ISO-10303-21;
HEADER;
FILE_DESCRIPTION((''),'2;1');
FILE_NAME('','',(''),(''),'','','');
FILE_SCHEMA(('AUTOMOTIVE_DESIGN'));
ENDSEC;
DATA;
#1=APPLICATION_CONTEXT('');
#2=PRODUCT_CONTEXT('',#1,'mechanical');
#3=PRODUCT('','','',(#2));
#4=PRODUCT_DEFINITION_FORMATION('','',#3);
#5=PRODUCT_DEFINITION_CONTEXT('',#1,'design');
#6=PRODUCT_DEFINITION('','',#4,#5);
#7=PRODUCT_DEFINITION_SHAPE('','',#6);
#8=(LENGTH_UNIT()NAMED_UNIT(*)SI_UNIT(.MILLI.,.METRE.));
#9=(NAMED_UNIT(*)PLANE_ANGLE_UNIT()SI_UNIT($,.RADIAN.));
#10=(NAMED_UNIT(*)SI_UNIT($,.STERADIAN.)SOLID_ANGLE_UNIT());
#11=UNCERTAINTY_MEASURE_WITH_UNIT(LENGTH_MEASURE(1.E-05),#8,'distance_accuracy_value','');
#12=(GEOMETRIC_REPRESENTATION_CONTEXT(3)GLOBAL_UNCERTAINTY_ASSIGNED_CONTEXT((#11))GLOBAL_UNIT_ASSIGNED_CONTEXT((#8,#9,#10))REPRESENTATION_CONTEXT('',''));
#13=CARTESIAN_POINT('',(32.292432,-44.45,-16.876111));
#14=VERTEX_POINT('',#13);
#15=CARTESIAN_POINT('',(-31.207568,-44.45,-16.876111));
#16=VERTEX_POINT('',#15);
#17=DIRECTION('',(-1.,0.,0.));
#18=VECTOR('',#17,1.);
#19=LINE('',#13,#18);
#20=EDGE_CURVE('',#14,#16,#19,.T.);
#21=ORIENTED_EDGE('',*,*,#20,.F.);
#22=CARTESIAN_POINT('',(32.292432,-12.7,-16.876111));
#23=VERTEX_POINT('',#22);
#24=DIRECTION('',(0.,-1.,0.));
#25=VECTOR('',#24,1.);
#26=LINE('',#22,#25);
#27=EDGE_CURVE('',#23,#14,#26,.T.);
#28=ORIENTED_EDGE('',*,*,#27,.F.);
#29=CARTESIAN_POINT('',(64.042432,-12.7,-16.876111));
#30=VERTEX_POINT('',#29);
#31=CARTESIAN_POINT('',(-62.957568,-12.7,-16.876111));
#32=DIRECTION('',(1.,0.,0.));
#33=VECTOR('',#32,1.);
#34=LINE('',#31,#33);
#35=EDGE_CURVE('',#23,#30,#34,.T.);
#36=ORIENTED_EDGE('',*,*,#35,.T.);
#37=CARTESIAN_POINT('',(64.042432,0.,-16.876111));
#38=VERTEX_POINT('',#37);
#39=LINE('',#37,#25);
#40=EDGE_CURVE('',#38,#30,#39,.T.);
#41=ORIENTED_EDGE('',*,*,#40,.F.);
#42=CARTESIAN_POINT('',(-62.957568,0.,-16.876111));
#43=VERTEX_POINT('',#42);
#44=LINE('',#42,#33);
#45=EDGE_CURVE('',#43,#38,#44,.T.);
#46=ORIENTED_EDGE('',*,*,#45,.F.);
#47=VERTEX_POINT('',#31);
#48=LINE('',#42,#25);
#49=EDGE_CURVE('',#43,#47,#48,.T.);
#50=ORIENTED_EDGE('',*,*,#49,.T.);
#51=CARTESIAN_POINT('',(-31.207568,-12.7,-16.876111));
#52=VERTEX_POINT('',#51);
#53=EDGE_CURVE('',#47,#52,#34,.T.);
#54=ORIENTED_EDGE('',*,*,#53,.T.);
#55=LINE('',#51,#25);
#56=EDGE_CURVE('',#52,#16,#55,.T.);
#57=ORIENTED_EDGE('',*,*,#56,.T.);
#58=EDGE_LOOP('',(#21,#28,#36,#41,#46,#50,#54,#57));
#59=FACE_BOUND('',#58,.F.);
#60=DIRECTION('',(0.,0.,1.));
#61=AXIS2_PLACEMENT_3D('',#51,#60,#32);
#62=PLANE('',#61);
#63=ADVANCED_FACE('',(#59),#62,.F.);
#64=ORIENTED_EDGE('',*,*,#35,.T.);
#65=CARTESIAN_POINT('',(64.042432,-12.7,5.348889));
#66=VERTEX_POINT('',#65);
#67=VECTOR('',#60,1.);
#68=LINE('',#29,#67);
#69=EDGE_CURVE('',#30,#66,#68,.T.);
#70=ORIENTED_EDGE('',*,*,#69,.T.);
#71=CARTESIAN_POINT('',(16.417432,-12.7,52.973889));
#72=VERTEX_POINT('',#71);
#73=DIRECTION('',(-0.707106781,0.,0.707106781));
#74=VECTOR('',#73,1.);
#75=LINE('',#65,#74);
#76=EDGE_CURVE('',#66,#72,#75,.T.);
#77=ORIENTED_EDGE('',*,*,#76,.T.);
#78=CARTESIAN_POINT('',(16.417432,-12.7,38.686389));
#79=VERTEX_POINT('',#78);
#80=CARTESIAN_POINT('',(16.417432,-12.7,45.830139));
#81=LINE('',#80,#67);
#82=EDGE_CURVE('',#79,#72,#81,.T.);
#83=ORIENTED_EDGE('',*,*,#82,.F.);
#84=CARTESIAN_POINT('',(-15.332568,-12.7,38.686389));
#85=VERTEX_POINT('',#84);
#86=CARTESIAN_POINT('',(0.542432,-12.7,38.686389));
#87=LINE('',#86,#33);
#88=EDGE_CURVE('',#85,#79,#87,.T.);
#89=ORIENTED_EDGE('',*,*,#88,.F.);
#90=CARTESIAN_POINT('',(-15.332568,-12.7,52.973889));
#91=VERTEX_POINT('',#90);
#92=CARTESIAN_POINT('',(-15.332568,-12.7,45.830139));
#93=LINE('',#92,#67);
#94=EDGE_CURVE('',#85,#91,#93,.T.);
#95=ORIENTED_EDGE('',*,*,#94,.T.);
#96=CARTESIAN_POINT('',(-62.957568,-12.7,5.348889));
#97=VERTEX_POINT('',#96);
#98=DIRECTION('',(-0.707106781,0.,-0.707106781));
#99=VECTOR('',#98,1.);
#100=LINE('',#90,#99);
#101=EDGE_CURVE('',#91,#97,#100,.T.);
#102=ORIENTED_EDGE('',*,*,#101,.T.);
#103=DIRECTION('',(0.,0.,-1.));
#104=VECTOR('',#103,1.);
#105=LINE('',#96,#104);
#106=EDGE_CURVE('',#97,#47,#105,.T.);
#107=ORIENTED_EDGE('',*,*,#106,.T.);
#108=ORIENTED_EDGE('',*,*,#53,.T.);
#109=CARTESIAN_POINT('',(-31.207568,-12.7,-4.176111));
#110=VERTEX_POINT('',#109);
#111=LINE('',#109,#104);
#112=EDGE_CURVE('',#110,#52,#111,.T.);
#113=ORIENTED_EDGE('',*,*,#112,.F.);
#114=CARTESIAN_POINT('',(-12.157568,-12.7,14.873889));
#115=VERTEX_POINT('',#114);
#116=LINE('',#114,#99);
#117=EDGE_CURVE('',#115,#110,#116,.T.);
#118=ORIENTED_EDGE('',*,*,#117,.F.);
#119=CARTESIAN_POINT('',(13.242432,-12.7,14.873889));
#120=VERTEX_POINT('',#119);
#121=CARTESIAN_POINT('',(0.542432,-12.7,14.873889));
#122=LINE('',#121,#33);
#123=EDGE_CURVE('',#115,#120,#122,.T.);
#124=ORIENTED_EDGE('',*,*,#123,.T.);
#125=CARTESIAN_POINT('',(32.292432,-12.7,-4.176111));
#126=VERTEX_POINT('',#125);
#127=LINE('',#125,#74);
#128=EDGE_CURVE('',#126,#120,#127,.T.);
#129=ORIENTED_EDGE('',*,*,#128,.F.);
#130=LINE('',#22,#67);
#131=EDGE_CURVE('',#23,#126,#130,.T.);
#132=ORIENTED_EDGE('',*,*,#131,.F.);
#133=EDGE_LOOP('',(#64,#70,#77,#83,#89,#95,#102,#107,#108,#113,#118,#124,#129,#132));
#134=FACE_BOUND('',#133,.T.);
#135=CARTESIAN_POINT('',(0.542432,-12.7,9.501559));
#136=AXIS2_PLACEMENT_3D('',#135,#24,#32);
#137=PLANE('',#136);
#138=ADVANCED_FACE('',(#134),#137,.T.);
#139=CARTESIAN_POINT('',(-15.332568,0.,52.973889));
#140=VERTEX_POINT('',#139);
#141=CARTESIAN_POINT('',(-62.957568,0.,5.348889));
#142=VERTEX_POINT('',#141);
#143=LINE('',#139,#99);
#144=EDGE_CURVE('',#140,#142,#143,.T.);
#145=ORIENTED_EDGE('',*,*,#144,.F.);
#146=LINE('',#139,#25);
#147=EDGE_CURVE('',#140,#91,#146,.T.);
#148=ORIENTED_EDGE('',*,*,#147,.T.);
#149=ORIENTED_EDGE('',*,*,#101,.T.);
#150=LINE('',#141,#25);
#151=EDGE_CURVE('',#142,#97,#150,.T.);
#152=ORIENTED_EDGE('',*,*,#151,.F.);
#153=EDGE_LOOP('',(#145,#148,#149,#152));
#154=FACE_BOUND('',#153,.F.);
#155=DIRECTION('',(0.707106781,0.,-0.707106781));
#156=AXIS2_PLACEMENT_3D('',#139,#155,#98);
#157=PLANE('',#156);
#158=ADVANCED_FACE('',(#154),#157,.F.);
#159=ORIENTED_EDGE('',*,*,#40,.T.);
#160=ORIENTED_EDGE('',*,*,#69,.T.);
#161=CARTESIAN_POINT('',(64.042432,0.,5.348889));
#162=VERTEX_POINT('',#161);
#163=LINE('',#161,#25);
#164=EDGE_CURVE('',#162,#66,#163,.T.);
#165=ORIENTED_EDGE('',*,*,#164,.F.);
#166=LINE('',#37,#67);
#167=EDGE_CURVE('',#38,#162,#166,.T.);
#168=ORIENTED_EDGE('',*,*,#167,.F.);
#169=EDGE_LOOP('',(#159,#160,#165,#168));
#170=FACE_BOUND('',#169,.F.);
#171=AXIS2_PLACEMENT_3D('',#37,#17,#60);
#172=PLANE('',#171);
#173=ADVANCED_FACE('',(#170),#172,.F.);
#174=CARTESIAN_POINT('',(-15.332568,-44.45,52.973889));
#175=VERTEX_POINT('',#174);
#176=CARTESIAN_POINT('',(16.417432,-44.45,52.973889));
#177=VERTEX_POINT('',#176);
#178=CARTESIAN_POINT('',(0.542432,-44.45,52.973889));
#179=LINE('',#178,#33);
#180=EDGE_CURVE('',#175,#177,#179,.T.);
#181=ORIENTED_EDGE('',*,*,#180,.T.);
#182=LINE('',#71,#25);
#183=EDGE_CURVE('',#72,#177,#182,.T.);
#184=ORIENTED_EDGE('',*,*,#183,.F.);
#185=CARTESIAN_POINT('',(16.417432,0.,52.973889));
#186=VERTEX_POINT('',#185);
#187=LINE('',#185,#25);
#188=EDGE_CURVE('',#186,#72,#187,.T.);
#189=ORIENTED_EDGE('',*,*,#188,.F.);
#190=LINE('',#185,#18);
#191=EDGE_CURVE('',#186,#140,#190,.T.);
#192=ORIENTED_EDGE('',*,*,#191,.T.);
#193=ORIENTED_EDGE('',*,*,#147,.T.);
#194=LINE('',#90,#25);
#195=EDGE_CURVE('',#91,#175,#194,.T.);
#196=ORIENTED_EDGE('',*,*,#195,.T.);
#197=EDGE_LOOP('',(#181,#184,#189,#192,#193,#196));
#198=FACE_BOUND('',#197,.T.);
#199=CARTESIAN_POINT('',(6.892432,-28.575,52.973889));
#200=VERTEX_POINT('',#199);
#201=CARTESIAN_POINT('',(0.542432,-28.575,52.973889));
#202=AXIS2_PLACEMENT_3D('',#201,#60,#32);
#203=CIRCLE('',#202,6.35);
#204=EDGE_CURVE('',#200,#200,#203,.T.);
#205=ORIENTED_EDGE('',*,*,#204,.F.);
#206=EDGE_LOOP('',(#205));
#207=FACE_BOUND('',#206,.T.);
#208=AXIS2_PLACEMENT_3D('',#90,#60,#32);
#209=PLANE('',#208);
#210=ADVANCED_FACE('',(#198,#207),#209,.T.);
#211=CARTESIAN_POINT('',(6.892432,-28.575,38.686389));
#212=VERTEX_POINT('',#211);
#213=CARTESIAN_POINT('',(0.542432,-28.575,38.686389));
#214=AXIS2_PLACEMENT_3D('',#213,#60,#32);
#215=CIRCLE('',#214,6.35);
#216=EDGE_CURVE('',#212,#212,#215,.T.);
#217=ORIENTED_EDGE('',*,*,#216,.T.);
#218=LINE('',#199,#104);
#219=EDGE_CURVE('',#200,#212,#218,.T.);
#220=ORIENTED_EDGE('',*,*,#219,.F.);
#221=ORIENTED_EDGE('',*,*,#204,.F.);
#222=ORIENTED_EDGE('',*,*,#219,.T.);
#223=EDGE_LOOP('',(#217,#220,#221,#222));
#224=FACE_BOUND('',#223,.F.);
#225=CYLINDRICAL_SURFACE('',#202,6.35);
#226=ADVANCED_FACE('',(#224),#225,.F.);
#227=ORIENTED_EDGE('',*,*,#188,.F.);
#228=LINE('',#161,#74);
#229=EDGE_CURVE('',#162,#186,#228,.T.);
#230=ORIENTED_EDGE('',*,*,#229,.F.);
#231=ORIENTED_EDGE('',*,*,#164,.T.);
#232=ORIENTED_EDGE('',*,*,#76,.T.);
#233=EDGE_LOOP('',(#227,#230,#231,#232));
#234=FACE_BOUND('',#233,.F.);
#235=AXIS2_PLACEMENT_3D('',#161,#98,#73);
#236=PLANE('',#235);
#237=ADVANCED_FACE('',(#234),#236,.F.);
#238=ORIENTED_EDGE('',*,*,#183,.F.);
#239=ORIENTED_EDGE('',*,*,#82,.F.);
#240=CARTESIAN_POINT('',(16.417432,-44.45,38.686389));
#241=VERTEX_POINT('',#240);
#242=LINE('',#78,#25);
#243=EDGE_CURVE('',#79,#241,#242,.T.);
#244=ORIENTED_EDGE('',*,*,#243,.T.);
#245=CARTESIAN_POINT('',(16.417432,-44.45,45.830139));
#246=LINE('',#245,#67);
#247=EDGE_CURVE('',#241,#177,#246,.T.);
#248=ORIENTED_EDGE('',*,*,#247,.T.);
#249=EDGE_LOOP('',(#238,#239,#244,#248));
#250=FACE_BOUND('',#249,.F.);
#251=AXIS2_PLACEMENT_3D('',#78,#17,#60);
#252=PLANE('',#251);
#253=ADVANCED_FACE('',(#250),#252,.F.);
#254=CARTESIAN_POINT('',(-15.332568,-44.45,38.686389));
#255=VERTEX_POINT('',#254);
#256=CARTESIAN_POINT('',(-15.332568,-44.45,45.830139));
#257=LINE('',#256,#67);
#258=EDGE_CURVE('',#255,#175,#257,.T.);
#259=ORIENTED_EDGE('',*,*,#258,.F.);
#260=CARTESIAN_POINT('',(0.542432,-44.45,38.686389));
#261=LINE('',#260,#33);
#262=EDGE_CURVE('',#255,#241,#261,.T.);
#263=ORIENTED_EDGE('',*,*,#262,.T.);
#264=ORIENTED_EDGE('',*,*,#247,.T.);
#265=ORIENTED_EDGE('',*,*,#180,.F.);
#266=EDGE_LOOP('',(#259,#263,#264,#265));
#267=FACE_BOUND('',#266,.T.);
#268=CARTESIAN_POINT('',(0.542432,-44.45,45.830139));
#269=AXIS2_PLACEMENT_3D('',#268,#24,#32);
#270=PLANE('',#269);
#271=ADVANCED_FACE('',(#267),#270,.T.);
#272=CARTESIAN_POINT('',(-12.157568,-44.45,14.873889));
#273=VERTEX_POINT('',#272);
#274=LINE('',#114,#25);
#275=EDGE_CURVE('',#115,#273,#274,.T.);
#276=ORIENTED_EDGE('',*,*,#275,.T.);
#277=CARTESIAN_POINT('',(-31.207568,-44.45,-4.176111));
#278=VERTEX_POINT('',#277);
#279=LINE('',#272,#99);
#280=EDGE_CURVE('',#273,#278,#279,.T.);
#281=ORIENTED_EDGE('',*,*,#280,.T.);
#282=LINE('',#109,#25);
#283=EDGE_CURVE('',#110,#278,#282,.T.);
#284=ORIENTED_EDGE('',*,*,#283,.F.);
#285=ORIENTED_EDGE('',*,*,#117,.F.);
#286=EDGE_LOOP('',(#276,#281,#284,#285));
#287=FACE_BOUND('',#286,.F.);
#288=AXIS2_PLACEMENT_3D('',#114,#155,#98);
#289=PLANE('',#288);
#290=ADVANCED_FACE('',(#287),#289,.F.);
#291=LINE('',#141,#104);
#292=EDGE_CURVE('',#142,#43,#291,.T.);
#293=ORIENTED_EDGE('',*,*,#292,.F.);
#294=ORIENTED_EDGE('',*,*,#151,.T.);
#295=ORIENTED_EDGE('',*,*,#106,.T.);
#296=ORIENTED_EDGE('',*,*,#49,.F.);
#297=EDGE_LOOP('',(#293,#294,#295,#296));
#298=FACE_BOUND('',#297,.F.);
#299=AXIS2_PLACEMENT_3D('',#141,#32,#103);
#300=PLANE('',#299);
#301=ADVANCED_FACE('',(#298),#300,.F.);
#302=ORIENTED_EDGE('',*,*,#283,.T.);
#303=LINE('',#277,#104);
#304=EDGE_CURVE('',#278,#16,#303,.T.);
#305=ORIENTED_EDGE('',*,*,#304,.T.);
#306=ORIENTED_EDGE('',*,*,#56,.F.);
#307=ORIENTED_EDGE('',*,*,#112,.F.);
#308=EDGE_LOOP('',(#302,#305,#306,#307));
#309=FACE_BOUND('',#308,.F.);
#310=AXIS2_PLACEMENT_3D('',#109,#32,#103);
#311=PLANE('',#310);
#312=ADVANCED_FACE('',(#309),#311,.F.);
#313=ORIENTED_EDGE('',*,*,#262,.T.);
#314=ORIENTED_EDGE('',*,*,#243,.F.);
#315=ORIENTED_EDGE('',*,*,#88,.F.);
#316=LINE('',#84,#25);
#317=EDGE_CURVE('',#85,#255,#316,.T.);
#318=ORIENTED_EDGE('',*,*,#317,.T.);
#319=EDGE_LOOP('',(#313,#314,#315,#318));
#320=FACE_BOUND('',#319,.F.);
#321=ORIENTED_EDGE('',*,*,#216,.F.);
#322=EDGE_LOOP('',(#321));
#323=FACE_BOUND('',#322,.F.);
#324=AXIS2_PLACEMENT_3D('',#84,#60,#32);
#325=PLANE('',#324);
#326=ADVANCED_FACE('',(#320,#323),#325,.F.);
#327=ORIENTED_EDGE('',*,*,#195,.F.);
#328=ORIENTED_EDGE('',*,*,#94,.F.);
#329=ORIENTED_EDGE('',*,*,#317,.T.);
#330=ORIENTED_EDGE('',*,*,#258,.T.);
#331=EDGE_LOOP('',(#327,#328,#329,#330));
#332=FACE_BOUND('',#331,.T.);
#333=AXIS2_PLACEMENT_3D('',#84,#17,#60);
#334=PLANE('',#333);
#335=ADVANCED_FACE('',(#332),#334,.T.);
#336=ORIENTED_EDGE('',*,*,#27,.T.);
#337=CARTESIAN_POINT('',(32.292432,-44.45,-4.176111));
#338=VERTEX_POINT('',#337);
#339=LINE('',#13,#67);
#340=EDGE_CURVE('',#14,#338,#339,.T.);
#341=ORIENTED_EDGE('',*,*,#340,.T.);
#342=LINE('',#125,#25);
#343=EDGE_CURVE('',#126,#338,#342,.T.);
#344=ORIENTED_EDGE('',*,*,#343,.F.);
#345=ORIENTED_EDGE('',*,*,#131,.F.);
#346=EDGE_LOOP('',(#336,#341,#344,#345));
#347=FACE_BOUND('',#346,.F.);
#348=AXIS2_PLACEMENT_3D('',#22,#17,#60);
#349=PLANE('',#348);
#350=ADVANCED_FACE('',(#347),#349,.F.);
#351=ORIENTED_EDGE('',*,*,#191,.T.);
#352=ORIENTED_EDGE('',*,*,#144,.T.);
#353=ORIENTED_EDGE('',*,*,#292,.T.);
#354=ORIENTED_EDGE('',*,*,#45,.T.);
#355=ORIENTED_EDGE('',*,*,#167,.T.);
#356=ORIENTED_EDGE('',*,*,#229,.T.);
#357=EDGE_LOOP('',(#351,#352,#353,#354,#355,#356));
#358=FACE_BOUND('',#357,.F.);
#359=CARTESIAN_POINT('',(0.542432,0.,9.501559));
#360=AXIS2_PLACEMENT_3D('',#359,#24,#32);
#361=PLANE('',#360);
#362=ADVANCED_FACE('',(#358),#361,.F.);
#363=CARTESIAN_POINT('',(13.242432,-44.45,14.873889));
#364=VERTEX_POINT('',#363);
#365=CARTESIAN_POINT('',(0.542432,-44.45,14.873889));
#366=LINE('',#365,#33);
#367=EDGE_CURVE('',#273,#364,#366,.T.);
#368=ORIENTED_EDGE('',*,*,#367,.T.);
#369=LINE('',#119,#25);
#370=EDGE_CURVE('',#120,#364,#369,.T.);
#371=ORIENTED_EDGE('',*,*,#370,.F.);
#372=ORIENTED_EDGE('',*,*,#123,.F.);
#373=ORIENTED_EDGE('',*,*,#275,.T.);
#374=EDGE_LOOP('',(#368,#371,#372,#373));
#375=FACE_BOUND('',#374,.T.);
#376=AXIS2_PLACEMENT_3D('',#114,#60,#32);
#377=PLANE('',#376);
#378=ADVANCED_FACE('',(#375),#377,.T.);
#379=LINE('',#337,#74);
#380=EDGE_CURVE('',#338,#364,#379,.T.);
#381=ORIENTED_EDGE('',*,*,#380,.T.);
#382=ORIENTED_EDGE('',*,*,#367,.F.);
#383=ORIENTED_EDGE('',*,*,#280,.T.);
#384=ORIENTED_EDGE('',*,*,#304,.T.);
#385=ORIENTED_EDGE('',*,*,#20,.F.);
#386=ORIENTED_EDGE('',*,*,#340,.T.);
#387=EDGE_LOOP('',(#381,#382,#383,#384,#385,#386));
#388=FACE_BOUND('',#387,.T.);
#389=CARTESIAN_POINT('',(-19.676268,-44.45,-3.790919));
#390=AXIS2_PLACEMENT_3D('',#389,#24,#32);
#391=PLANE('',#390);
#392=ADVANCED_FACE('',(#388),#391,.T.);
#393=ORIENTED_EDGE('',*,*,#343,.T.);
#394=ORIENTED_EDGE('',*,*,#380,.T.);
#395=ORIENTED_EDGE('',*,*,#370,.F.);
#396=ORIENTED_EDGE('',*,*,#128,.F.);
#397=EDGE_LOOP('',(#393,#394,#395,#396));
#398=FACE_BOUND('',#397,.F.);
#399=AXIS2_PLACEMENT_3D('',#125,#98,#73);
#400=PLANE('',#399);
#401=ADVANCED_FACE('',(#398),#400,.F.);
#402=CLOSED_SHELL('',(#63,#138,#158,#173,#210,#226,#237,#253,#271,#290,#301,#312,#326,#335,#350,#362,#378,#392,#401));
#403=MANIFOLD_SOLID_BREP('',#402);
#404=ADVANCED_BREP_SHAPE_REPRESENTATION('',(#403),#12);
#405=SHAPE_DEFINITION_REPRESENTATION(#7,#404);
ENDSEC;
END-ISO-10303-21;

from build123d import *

# Parameters (mm, degrees)
F1_DEPTH = 12.7
F3_W     = 25.4
F3_H     = 31.75
F5_DEPTH = 31.75
F6_W     = 31.75
F6_H     = 14.2875
F7_DEPTH = 31.75
F8_R     = 6.35
F9_DEPTH = 14.3002


# Not quite as in the source:
# - a feature names something its author has since deleted; it is built from what else it names


with BuildPart() as f1:
    # F0 (on Front) → F1 (new body)
    with BuildSketch(Plane.XZ):
        Polygon((16.4174322337, 52.9738886915), (-15.3325677663, 52.9738886915), (-62.9575677663, 5.3488886915), (-62.9575677663, -16.8761113085), (64.0424322337, -16.8761113085), (64.0424322337, 5.3488886915), align=None)
    extrude(amount=F1_DEPTH)

    # F4 (on face) + F2 (on face) + F3 (on face) → F5 (join)
    with BuildSketch(Plane.XZ.offset(12.7)):
        Polygon((-31.2075677663, -4.1761113085), (-31.2075677663, -16.8761113085), (-12.1575677663, -16.8761113085), (-12.1575677663, 14.8738886915), align=None)
    with BuildSketch(Plane.XZ.offset(12.7)):
        Polygon((32.2924322337, -4.1761113085), (13.2424322337, 14.8738886915), (13.2424322337, -16.8761113085), (32.2924322337, -16.8761113085), align=None)
    with BuildSketch(Plane.XZ.offset(12.7)):
        with Locations((0.5424322337, -1.0011113085)):
            Rectangle(F3_W, F3_H)
    extrude(amount=F5_DEPTH)

    # F6 (on face) → F7 (join)
    with BuildSketch(Plane.XZ.offset(12.7)):
        with Locations((0.5424322337, 45.8301386915)):
            Rectangle(F6_W, F6_H)
    extrude(amount=F7_DEPTH)

    # F8 (on face) → F9 (cut)
    with BuildSketch(Plane.XY.offset(52.9738886915)):
        with Locations((0.5424322337, -28.575)):
            Circle(F8_R)
    extrude(amount=-F9_DEPTH, mode=Mode.SUBTRACT)


solid = f1.part
